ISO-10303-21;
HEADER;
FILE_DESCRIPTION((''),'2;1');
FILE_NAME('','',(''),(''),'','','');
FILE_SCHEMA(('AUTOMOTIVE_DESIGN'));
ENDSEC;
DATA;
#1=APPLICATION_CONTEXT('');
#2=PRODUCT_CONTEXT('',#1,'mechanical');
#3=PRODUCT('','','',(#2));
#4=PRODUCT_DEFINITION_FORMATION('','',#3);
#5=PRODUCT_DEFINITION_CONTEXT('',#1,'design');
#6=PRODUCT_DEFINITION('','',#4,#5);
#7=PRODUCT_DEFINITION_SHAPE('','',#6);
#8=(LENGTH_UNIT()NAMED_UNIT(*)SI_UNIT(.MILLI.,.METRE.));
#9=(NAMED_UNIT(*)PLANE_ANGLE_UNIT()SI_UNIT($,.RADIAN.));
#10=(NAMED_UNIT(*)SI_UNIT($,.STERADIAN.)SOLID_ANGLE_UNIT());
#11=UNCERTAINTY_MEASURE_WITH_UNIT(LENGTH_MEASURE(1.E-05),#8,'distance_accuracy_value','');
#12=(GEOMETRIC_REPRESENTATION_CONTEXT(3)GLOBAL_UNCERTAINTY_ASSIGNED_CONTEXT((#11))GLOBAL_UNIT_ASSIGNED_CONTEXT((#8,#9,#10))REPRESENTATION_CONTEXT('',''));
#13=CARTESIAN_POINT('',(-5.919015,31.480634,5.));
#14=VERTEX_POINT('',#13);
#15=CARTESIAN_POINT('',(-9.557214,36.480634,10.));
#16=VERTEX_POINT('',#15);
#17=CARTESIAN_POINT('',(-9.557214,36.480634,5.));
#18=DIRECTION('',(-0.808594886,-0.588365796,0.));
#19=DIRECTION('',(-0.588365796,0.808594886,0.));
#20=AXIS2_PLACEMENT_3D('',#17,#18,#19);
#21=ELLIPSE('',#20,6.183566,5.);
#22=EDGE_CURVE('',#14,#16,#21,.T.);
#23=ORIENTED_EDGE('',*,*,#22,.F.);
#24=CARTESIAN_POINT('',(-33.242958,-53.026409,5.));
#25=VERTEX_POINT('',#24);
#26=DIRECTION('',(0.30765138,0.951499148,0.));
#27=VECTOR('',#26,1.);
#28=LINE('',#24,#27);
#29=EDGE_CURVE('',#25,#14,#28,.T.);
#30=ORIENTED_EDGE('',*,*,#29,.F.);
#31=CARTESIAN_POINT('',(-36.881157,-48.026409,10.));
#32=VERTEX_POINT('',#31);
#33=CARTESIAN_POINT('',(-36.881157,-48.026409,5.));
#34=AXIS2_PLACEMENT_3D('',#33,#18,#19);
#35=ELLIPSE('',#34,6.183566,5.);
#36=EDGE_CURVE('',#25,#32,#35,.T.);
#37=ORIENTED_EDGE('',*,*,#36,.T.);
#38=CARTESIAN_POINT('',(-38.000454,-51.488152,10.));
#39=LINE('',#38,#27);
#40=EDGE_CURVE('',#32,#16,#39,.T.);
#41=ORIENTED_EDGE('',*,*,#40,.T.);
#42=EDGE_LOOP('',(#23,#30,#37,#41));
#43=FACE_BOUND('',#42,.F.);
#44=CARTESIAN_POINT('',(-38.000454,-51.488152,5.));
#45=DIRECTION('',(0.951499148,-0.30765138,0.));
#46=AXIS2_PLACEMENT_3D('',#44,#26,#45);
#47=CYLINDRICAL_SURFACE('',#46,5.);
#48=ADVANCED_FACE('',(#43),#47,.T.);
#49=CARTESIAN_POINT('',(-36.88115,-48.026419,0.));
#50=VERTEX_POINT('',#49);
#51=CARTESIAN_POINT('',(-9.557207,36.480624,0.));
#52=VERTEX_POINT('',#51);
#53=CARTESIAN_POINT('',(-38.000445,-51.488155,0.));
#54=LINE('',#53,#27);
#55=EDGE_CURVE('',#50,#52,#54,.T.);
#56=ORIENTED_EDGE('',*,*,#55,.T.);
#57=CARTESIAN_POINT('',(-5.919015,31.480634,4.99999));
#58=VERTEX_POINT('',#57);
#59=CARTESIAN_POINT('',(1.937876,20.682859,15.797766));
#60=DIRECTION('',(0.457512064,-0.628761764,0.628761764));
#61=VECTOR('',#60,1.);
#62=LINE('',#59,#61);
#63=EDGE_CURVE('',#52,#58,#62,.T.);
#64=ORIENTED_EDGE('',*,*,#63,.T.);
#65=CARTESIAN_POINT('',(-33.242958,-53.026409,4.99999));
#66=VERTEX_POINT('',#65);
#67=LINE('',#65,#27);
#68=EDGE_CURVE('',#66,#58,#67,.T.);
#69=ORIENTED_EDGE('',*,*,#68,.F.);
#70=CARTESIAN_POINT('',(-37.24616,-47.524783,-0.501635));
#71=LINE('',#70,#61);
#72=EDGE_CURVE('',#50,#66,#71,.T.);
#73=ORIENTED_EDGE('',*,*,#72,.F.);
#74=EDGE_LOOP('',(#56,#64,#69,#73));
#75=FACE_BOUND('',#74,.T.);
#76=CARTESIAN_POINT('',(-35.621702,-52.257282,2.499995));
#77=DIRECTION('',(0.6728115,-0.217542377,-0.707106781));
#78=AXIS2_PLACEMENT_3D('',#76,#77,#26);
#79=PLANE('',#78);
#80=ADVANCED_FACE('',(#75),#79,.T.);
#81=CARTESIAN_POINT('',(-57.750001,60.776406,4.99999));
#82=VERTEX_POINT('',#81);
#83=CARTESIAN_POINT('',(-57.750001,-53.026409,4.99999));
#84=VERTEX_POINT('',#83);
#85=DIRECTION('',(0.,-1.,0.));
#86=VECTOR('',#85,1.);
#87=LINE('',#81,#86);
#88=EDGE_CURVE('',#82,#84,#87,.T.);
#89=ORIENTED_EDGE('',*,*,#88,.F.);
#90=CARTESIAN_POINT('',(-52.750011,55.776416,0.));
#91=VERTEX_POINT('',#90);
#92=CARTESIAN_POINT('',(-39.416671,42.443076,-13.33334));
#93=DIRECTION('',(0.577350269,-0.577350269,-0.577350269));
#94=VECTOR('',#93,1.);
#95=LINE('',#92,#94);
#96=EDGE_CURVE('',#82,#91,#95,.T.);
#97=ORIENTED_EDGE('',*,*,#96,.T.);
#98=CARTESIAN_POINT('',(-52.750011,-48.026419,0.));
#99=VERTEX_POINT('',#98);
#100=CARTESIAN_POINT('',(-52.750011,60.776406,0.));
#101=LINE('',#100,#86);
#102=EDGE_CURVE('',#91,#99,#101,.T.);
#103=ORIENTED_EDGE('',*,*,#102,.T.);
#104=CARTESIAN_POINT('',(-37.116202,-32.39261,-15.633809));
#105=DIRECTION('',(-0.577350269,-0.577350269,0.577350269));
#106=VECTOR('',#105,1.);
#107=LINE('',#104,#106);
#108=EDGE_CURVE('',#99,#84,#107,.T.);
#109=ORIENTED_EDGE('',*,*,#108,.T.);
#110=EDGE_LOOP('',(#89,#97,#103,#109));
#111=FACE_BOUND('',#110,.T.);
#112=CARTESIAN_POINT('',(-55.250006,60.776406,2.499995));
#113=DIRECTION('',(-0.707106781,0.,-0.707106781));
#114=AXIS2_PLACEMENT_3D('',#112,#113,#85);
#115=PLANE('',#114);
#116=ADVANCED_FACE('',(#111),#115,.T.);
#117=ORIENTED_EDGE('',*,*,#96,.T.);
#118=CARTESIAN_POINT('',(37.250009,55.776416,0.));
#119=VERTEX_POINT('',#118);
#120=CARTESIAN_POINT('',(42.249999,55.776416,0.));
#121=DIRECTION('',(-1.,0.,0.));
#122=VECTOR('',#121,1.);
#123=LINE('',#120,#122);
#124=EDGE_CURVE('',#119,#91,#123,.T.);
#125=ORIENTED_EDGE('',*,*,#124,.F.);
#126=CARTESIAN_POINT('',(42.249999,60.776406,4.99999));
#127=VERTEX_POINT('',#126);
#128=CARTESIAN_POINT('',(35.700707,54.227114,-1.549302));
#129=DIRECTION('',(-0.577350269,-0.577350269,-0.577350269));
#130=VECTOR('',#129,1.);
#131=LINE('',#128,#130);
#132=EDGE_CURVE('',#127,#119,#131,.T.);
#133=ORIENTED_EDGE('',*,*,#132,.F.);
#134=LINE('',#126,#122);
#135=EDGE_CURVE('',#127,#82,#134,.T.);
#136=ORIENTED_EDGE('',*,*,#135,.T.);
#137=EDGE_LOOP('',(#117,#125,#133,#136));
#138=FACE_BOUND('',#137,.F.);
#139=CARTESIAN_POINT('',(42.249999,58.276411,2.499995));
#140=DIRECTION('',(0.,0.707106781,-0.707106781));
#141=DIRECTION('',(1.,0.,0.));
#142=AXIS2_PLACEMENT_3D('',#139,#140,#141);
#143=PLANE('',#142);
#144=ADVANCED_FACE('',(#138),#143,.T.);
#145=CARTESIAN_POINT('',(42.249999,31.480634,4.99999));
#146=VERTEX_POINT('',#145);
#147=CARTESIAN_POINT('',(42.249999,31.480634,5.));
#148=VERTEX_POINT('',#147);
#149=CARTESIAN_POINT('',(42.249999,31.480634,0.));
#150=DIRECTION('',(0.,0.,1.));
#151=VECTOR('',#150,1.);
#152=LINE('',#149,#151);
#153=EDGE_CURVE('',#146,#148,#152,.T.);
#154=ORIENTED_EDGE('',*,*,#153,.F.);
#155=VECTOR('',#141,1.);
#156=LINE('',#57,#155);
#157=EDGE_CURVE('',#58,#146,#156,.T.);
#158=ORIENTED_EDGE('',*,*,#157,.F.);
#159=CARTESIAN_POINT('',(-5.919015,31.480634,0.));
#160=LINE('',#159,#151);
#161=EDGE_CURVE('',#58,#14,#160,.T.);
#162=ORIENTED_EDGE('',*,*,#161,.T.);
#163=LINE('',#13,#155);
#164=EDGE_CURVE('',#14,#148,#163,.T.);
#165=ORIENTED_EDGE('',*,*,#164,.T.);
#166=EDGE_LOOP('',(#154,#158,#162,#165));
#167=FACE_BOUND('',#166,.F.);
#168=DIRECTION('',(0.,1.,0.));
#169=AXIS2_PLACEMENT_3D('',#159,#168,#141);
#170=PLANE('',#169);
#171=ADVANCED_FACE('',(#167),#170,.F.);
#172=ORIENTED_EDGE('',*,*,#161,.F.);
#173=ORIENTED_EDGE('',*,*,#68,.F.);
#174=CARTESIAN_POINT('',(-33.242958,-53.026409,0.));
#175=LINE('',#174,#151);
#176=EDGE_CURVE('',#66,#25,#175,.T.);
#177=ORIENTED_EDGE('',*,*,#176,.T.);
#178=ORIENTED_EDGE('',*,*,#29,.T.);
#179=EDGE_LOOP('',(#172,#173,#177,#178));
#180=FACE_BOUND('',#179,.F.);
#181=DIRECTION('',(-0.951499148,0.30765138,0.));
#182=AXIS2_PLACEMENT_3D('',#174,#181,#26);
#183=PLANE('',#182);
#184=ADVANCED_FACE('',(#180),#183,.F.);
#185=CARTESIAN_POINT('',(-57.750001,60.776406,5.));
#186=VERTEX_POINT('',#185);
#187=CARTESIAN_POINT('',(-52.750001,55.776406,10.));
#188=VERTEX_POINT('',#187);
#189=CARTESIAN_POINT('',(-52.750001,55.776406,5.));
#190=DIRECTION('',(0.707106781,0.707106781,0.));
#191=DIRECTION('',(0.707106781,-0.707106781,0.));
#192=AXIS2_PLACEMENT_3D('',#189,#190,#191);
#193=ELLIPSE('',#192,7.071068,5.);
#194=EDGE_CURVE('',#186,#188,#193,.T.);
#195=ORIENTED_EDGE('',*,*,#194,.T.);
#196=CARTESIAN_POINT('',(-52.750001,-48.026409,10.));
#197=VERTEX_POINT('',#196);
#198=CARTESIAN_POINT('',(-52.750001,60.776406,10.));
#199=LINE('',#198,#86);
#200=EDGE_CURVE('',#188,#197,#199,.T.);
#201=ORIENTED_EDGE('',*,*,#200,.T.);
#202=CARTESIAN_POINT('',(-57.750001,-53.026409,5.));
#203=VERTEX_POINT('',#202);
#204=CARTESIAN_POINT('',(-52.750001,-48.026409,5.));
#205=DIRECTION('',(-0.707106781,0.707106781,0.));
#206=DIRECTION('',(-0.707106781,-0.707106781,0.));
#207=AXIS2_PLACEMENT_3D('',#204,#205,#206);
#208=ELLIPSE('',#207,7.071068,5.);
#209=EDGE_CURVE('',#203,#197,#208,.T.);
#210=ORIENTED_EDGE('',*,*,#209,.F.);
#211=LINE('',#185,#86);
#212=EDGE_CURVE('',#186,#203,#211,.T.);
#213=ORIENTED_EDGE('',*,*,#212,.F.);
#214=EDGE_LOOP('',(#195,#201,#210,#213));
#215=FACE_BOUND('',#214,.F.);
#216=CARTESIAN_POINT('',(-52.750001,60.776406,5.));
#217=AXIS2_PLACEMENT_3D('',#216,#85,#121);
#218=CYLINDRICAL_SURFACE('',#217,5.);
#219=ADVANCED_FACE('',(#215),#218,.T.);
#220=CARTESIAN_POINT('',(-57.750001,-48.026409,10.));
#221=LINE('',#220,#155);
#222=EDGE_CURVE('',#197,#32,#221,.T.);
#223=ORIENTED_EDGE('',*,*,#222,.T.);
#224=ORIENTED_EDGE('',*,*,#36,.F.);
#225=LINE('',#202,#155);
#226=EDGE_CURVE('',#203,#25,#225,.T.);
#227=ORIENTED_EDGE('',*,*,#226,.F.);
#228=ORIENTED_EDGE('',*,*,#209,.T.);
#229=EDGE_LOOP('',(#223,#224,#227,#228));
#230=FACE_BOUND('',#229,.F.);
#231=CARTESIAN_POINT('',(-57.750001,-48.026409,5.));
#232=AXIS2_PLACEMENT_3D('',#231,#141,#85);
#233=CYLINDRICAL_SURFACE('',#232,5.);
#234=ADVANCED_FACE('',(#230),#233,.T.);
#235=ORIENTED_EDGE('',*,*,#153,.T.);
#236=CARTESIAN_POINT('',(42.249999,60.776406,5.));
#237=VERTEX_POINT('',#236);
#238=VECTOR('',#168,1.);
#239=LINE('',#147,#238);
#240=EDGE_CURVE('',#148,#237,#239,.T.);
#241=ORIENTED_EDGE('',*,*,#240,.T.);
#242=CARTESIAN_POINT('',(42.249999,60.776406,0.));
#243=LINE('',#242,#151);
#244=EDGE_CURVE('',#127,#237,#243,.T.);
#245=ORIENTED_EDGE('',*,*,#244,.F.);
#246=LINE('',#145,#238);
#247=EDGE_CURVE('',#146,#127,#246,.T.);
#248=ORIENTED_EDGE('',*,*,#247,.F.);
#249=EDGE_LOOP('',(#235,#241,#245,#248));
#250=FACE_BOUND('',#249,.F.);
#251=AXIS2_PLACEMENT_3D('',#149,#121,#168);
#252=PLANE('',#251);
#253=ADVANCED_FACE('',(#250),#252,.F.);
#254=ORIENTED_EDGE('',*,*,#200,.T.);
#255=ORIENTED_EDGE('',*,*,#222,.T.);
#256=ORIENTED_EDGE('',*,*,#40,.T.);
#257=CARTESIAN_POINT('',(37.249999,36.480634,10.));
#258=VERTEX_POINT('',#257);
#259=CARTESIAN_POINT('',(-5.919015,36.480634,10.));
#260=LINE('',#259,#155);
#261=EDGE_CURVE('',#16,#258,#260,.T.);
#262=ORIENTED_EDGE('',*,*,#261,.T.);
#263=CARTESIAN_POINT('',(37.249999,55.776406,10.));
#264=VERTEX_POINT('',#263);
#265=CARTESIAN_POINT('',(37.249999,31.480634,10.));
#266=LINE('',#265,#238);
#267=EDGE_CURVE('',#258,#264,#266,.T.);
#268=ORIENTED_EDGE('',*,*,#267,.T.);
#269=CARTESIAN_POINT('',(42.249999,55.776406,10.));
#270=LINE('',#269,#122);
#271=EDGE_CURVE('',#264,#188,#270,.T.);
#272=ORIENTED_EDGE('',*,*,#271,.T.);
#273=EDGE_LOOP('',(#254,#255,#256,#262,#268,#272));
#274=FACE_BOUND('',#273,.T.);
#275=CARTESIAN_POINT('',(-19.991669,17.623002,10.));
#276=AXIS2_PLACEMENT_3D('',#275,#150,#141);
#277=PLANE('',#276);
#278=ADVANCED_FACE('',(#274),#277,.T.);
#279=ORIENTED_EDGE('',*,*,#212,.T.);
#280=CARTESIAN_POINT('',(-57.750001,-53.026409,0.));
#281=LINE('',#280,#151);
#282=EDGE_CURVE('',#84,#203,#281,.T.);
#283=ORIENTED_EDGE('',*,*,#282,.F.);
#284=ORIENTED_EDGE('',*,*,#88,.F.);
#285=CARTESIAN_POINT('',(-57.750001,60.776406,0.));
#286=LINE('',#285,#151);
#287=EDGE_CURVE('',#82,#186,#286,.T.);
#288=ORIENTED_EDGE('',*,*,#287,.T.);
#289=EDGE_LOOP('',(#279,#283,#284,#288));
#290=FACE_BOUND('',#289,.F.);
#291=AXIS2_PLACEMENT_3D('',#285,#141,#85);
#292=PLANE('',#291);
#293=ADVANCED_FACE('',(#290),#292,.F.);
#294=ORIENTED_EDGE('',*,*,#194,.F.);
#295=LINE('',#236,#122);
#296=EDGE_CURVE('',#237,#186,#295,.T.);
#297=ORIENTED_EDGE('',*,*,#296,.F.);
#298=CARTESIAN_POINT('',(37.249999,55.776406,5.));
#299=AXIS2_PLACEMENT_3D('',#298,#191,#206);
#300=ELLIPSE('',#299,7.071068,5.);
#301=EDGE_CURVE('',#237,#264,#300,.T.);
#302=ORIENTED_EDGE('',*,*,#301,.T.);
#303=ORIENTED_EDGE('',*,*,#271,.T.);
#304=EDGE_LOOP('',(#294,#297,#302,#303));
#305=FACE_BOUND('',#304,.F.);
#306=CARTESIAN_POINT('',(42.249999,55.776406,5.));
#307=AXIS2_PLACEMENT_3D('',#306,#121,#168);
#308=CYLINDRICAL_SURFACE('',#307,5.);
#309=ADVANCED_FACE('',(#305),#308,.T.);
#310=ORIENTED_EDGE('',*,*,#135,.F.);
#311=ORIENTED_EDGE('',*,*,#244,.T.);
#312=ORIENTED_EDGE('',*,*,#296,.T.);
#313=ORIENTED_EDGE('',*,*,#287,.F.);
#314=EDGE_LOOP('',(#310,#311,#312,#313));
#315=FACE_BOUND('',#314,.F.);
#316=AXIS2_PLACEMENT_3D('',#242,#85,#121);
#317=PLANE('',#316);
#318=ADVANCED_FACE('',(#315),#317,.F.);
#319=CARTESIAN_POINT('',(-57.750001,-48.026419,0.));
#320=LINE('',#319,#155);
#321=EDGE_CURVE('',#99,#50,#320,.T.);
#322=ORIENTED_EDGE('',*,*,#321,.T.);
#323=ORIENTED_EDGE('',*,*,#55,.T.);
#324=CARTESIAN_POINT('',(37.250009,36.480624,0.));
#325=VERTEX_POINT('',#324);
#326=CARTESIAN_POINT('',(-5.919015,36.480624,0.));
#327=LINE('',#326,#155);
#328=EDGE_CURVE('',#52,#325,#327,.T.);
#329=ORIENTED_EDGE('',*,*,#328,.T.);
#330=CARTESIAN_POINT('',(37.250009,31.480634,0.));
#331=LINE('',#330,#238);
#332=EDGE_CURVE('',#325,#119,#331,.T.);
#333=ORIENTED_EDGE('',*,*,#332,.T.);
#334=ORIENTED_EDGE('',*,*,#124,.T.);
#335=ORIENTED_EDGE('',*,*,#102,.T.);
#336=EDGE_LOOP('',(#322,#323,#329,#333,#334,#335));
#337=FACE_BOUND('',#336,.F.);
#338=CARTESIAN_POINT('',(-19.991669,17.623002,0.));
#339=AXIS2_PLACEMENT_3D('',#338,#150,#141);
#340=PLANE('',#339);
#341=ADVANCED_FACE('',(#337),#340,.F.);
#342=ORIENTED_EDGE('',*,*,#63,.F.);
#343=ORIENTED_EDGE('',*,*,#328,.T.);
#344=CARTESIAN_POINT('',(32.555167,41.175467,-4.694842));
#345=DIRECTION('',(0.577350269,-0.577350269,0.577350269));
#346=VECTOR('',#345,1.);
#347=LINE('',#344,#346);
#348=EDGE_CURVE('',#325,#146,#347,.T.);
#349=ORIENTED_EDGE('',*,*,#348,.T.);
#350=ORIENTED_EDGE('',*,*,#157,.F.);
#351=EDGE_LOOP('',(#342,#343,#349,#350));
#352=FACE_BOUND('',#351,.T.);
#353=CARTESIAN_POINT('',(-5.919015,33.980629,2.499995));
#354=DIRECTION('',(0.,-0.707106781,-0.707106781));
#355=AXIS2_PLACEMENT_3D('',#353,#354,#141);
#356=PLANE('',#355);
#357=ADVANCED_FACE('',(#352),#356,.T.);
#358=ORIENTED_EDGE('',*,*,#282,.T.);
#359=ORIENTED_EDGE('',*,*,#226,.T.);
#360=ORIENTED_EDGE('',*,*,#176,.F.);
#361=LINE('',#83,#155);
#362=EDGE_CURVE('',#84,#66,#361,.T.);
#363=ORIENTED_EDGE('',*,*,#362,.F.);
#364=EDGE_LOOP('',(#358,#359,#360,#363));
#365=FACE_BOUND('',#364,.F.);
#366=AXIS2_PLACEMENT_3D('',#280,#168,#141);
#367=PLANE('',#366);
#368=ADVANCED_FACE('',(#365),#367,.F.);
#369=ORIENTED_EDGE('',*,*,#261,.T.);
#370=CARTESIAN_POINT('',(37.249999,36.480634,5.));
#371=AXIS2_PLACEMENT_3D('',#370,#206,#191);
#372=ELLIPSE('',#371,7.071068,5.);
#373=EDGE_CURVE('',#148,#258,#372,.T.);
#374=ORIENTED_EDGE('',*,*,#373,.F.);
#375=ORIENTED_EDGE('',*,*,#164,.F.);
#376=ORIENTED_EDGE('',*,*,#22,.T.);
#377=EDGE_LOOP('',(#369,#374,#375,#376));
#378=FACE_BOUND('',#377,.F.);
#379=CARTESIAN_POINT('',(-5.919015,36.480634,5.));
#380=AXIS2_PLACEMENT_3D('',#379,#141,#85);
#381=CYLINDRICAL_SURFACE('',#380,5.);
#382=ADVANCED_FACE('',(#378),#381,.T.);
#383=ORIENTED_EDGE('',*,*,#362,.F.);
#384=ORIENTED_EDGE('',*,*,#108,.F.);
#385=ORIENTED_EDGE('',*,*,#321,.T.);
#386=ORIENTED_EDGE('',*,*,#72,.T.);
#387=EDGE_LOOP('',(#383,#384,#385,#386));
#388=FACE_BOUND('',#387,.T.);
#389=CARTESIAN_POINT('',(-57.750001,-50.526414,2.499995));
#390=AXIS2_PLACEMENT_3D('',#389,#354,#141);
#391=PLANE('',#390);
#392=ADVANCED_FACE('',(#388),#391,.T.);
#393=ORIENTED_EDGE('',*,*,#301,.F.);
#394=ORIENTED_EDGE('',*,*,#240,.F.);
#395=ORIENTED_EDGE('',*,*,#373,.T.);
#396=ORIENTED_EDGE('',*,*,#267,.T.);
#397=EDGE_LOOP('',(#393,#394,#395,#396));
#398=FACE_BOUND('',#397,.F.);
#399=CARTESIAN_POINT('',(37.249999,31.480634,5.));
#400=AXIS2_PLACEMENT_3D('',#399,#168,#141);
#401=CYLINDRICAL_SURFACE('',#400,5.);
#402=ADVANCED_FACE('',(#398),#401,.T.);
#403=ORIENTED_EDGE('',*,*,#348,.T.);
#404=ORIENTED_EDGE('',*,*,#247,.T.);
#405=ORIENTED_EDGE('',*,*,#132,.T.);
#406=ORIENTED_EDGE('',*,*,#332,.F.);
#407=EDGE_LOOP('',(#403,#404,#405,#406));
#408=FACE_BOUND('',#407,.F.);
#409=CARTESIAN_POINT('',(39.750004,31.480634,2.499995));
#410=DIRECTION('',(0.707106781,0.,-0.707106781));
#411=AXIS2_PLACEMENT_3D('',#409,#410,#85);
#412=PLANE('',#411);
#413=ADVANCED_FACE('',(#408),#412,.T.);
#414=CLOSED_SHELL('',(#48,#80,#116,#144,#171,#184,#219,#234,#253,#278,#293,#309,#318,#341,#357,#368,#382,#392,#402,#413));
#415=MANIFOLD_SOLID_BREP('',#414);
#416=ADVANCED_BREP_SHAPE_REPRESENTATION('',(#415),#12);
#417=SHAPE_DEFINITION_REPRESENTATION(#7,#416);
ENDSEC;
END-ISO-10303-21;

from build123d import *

# Parameters (mm, degrees)
F1_DEPTH = 10
F2_R     = 5
F3_SIZE  = 4.99999


# Not quite as in the source:
# - a fillet or chamfer is up to 0.001 mm smaller than in the source, because OpenCascade refuses the exact size


with BuildPart() as f1:
    # F0 (on Top) → F1 (new body)
    with BuildSketch(Plane.XY):
        Polygon((42.2499991953, 60.7764059144), (-57.7500008047, 60.7764059144), (-57.7500008047, -53.026408835), (-33.2429584743, -53.026408835), (-5.9190154745, 31.4806343348), (42.2499991953, 31.4806343348), align=None)
    extrude(amount=F1_DEPTH)

    # F2
    f2_edges = [f1.edges().sort_by_distance(p)[0] for p in [
        (-57.750001, 3.874999, 10),
        (-19.580987, -10.772887, 10),
        (-45.49648, -53.026409, 10),
        (18.165492, 31.480634, 10),
        (-7.750001, 60.776406, 10),
        (42.249999, 46.12852, 10),
    ]]
    fillet(f2_edges, radius=F2_R)

    # F3 (size 5 in the source; OpenCascade refuses exactly that, so slightly less here)
    f3_edges = [f1.edges().sort_by_distance(p)[0] for p in [
        (18.165492, 31.480634, 0),
        (42.249999, 46.12852, 0),
        (-7.750001, 60.776406, 0),
        (-57.750001, 3.874999, 0),
        (-45.49648, -53.026409, 0),
        (-19.580987, -10.772887, 0),
    ]]
    chamfer(f3_edges, length=F3_SIZE)


solid = f1.part
